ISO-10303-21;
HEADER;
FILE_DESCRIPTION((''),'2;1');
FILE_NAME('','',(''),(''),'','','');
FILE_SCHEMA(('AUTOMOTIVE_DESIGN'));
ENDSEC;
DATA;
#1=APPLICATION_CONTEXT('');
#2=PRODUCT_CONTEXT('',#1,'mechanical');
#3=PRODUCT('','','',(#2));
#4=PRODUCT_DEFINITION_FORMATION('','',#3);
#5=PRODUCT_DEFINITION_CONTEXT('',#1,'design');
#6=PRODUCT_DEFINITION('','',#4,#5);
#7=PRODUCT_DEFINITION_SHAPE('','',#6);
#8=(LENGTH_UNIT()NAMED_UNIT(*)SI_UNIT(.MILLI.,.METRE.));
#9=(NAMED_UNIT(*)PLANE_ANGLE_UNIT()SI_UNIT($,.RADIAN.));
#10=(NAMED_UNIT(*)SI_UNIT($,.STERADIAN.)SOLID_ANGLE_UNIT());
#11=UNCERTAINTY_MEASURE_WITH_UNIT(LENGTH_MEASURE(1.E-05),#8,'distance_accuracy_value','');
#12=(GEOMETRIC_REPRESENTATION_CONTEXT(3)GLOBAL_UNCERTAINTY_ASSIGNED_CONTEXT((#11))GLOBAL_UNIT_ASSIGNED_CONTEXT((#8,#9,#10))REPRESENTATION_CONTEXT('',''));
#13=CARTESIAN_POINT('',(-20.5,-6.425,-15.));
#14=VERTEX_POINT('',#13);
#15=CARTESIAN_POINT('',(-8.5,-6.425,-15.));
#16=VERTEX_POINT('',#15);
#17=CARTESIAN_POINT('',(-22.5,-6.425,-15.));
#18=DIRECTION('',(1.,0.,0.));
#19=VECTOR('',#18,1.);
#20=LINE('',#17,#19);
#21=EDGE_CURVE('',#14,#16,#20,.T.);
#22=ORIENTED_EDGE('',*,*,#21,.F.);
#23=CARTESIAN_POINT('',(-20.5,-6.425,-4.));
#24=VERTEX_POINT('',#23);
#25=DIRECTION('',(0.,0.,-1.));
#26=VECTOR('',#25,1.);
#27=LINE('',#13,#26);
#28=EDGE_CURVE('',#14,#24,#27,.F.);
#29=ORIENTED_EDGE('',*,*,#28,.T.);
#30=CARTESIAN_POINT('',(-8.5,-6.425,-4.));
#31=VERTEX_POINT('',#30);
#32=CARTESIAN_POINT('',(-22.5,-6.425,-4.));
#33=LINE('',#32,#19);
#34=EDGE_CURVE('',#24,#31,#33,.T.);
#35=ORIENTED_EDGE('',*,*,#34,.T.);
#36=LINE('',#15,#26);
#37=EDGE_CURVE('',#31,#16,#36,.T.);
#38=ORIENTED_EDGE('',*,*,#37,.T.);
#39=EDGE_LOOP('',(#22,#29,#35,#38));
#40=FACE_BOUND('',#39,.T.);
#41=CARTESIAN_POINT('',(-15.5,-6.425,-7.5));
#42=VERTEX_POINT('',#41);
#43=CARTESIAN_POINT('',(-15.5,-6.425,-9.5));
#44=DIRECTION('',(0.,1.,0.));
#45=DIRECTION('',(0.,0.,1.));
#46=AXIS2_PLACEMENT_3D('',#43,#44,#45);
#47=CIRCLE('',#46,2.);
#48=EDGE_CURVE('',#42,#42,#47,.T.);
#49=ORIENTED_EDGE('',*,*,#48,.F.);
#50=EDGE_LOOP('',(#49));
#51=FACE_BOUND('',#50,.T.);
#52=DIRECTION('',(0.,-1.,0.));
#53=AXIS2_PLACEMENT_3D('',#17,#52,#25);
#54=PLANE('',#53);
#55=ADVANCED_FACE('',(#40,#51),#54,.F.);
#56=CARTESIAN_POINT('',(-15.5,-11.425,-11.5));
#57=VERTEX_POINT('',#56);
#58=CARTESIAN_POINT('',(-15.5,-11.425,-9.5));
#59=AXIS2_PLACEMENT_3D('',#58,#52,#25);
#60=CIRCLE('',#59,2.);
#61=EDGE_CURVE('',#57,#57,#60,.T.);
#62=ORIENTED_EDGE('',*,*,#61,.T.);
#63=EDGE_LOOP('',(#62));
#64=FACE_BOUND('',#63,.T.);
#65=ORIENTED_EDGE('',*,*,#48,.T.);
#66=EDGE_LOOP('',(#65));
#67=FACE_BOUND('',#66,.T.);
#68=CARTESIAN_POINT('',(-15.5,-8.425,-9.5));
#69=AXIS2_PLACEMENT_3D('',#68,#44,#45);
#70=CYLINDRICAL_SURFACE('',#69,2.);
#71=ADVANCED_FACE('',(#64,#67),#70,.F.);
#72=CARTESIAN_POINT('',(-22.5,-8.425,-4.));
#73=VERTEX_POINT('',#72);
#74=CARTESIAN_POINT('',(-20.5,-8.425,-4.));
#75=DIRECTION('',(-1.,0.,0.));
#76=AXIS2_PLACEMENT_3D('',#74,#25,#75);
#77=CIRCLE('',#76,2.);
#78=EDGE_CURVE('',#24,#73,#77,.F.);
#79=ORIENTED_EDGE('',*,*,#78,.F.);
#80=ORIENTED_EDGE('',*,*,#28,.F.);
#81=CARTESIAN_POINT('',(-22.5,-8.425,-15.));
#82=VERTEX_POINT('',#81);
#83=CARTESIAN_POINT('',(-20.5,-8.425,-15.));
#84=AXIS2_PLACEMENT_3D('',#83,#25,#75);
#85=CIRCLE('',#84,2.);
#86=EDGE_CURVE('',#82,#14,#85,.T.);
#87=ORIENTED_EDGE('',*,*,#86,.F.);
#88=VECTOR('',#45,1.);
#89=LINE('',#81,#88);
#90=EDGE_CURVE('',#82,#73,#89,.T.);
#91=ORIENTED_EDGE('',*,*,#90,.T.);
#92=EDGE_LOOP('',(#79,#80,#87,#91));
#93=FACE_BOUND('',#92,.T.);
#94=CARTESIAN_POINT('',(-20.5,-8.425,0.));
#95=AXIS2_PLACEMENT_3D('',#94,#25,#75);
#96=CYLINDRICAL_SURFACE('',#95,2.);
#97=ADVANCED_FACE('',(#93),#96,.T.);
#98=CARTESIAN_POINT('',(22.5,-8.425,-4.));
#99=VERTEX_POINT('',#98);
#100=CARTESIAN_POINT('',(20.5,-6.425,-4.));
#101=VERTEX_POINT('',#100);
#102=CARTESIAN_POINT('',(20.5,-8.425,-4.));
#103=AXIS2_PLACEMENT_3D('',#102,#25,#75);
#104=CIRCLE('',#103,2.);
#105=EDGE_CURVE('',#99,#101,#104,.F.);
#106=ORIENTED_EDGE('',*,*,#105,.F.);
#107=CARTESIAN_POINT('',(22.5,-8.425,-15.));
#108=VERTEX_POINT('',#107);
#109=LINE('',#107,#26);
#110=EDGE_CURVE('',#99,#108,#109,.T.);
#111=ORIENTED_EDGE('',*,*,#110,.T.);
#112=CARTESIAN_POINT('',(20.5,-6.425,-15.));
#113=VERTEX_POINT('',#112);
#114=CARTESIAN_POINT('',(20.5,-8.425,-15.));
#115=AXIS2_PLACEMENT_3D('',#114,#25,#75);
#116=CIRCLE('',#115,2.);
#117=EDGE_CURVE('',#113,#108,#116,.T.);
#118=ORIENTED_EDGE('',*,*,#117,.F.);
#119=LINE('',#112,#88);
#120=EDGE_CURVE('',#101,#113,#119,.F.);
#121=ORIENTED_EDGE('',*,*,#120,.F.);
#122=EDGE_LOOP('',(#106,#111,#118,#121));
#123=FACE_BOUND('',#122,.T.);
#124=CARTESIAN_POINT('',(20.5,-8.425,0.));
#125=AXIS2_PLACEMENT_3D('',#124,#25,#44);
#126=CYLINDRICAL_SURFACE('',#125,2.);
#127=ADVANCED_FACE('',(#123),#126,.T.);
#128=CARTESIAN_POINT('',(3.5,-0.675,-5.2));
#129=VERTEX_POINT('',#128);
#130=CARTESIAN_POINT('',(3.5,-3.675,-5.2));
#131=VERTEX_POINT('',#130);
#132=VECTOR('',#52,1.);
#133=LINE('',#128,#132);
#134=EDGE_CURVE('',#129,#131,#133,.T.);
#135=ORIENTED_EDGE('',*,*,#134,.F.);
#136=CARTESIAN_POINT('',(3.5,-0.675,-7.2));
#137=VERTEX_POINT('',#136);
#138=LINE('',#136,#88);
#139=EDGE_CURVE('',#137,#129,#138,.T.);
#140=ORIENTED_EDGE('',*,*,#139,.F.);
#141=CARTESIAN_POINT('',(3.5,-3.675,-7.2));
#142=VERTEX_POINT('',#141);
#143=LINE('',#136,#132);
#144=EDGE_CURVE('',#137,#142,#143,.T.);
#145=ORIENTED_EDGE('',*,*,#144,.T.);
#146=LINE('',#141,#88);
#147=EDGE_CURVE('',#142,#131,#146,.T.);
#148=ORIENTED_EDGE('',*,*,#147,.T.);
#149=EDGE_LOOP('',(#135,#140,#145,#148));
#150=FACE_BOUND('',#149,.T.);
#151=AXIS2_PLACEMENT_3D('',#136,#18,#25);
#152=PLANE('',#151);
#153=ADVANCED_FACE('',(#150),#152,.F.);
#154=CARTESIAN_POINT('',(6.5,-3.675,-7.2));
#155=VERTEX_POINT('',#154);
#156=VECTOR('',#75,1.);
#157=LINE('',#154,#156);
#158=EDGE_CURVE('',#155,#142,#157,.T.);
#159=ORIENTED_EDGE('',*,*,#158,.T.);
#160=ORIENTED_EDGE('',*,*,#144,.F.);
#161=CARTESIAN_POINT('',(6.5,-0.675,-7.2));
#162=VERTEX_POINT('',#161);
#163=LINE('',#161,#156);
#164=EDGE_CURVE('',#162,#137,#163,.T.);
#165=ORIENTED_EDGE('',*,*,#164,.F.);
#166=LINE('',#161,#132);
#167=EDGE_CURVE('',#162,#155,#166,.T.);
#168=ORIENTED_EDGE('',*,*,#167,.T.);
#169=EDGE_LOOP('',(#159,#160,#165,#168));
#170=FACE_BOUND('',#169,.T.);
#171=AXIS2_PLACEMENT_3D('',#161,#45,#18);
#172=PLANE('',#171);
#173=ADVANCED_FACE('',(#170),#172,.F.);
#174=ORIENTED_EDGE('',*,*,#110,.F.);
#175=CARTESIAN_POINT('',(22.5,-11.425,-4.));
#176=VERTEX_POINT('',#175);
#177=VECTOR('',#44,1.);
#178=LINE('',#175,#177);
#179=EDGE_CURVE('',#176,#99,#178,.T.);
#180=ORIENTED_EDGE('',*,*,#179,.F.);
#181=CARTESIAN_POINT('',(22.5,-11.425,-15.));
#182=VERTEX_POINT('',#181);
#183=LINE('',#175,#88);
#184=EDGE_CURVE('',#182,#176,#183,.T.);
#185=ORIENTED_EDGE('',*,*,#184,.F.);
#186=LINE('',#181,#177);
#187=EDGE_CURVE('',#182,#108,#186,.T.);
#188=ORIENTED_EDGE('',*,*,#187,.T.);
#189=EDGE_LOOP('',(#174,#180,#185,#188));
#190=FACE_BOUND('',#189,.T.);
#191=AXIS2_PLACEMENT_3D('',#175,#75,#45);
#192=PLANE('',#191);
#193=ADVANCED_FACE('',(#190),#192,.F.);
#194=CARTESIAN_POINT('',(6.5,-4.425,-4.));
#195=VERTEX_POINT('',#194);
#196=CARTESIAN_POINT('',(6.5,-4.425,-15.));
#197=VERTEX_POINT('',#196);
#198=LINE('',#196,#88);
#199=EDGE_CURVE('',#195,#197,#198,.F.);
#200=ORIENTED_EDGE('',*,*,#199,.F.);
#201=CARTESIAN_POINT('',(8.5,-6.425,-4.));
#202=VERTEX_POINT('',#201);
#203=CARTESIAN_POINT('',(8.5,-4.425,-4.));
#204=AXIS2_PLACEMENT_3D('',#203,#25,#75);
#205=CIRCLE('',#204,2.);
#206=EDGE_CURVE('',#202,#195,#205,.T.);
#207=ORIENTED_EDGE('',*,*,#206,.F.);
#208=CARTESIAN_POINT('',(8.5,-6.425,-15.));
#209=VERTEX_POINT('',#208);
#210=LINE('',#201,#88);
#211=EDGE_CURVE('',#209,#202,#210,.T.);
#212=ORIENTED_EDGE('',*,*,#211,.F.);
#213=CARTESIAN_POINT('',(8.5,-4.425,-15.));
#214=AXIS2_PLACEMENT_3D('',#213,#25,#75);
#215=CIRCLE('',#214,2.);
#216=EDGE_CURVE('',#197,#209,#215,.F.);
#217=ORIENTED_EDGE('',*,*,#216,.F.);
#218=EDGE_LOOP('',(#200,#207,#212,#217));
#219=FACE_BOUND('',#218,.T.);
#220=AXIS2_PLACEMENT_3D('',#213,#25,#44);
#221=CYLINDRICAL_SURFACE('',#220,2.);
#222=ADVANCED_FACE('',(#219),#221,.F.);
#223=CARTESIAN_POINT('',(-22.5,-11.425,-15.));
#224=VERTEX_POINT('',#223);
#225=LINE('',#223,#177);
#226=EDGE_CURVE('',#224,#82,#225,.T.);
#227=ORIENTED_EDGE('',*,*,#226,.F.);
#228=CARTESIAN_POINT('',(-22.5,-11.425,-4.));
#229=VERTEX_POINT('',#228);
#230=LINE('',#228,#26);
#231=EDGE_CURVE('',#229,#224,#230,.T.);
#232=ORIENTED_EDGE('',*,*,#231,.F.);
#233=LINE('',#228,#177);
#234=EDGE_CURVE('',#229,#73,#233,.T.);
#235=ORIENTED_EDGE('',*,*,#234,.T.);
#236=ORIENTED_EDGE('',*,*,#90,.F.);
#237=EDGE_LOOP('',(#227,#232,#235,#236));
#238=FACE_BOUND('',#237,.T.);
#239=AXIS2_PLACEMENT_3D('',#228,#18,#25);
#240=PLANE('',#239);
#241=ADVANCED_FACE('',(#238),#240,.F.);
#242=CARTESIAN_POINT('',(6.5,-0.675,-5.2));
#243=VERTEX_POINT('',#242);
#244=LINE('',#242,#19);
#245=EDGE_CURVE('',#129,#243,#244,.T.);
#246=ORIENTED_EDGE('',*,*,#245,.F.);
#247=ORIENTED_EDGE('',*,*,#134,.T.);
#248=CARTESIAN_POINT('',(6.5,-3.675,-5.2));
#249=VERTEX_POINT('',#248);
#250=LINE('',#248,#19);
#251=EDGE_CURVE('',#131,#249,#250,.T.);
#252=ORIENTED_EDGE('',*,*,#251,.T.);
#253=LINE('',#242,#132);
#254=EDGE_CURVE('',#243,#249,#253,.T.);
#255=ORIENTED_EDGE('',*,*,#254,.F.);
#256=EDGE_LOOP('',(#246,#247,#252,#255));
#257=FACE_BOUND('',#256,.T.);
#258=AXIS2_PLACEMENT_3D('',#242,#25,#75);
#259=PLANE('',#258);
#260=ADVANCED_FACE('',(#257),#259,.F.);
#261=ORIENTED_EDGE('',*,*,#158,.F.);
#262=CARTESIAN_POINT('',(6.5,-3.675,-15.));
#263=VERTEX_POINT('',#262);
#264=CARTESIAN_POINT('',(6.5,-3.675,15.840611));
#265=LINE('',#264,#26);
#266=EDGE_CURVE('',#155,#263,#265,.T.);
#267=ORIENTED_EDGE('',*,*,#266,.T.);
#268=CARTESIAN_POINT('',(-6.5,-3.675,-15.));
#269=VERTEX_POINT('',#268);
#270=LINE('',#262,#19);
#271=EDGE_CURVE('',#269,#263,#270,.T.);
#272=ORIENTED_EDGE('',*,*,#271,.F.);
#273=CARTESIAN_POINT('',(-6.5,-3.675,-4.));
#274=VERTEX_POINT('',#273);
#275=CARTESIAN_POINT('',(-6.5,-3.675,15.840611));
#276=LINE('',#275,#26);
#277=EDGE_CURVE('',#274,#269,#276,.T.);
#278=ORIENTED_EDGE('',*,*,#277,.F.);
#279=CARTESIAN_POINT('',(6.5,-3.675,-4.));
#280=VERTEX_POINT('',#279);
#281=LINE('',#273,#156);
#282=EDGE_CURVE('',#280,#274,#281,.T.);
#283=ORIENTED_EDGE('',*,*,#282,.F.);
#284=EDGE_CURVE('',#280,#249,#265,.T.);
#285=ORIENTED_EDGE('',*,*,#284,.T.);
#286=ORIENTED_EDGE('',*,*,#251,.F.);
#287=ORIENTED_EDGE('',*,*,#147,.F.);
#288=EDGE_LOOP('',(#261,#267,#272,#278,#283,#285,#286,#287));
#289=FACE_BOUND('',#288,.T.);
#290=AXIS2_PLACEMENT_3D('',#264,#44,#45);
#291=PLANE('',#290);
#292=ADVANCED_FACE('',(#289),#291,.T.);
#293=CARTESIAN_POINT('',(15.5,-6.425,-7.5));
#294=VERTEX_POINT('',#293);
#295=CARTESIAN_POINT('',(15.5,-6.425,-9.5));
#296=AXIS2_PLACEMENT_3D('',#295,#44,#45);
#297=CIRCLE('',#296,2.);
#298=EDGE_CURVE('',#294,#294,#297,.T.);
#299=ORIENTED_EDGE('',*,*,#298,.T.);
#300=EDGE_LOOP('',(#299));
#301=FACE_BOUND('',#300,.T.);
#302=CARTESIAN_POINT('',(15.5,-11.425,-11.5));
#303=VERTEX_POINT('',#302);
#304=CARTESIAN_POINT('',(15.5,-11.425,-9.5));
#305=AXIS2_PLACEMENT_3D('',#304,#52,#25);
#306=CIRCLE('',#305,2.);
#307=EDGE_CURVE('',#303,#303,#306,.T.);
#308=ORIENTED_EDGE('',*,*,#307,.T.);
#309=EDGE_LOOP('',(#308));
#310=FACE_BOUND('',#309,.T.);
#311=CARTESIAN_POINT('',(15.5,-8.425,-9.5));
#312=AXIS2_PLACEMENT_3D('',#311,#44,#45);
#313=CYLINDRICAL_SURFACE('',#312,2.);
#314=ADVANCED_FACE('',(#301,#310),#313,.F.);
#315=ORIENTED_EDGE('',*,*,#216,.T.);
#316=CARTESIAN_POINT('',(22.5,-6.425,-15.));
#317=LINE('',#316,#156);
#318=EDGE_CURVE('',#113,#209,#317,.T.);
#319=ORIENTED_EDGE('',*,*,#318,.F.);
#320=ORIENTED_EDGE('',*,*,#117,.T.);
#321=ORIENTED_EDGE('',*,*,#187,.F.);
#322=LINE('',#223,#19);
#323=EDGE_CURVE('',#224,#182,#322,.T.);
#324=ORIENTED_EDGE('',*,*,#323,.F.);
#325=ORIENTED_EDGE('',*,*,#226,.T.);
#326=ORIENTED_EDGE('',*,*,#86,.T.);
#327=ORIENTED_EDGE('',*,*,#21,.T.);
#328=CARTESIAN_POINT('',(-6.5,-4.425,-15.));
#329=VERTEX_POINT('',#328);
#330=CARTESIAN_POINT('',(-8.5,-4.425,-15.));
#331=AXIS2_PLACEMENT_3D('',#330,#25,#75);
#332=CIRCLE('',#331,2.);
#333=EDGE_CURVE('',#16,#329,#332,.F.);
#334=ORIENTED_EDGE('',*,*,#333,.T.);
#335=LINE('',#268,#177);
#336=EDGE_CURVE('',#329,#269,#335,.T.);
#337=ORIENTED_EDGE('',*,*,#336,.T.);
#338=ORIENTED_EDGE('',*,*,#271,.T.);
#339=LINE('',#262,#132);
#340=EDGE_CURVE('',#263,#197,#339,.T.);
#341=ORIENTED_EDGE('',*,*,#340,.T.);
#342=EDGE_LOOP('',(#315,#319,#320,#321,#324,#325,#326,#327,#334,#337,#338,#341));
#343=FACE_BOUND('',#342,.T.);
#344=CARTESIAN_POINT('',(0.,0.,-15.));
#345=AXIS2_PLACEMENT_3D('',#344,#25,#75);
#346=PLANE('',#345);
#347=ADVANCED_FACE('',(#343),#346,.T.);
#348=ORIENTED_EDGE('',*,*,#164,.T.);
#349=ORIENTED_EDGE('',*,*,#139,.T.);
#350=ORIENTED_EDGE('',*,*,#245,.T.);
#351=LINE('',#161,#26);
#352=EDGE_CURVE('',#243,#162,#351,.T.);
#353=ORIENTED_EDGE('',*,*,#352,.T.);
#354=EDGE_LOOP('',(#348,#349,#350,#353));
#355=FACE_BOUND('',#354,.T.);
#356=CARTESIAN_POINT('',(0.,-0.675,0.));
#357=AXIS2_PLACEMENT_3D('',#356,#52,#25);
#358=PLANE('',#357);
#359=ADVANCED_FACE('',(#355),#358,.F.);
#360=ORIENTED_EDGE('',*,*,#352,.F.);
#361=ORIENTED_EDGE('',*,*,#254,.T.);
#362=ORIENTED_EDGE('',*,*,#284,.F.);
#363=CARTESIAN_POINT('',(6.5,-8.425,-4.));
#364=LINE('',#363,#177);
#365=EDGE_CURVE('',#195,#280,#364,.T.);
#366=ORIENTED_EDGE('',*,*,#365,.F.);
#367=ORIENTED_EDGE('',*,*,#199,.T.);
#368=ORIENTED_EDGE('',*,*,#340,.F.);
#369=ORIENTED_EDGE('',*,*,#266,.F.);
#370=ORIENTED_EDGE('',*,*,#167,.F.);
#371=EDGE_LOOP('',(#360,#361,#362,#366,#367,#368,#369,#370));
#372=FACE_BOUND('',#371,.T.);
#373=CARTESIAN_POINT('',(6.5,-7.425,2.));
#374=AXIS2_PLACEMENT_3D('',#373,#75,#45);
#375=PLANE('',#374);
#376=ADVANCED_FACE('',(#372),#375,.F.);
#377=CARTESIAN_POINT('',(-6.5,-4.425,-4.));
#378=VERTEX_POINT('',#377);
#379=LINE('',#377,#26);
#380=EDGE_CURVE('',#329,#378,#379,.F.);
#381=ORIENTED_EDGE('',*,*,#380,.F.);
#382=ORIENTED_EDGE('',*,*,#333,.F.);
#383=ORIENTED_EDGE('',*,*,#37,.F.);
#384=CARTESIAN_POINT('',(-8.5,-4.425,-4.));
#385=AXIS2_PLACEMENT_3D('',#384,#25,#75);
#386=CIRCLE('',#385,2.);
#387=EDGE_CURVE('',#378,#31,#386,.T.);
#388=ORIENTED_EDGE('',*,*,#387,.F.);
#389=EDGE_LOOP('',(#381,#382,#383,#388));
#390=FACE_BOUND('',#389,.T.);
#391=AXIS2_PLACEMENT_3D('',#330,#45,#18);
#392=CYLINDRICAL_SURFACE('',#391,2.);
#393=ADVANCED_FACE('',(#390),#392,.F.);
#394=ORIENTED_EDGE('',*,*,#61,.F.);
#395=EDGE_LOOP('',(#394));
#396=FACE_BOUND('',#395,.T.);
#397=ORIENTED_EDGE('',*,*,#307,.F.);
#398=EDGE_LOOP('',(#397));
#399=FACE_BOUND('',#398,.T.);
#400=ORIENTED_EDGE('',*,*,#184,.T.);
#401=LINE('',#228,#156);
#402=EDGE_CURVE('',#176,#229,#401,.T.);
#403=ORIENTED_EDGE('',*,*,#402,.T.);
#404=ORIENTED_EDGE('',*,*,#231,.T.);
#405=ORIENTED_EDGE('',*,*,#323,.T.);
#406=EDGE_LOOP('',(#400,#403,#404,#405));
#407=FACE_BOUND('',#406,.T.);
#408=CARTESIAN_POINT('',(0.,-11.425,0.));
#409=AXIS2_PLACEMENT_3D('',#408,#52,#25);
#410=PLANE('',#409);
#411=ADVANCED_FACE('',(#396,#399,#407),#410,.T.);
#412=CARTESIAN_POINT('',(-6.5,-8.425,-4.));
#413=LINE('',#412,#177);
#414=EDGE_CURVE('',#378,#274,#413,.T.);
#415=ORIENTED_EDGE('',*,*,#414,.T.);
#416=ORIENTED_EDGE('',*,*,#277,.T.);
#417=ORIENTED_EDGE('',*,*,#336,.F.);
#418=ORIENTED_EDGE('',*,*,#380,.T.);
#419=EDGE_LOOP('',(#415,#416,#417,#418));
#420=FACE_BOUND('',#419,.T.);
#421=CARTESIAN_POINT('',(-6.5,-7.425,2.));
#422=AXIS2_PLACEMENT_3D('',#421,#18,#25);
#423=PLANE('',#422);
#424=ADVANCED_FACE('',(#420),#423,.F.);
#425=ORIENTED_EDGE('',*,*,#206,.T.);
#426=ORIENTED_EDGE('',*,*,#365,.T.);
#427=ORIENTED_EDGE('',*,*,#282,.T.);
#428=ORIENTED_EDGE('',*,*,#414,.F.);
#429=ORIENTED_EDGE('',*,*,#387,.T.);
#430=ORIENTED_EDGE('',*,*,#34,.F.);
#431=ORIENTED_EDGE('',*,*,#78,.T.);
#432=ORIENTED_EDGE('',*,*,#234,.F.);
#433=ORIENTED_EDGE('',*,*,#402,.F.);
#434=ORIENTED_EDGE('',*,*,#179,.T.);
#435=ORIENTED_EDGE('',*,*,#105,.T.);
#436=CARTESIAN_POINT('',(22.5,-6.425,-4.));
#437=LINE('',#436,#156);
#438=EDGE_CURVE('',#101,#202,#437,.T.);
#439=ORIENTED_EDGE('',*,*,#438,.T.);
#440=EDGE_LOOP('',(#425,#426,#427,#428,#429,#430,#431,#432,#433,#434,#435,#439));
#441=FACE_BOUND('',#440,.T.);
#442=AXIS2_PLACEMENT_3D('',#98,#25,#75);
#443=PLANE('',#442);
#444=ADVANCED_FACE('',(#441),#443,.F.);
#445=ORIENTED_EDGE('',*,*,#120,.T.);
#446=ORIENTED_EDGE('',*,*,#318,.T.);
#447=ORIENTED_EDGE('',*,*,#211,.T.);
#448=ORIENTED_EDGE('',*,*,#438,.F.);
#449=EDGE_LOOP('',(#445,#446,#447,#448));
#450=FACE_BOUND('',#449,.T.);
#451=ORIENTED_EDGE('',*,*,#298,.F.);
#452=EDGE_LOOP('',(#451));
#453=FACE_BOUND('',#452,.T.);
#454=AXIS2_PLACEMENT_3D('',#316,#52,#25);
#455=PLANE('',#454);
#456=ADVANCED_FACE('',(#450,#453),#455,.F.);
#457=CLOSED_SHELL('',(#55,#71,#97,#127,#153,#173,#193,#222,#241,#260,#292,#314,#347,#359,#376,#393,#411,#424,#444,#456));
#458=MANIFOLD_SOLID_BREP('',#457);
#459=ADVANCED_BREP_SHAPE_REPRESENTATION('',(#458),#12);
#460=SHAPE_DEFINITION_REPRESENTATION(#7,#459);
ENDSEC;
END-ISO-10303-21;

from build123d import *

# Parameters (mm, degrees)
BOSS_EXTRUDE1_DEPTH      = 2
SKETCH2_R                = 1
CUT_EXTRUDE1_DEPTH       = 11.827309223
CUT_EXTRUDE2_DEPTH       = 11.827309223
BOSS_EXTRUDE3_DEPTH      = 15
BOSS_EXTRUDE3_DEPTH_BACK = 2
SKETCH4_W                = 13
SKETCH4_H                = 4.75
SKETCH6_W                = 11
SKETCH6_H                = 2
BOSS_EXTRUDE4_DEPTH      = 16
SKETCH7_W                = 11
SKETCH7_H                = 2
BOSS_EXTRUDE5_DEPTH      = 16
SKETCH8_R                = 2
CUT_EXTRUDE3_DEPTH       = 31.850810362
FILLET5_R                = 2
FILLET6_R                = 2
FILLET7_R                = 2
FILLET8_R                = 2
SKETCH10_W               = 2
SKETCH10_H               = 16.939290608
CUT_EXTRUDE4_DEPTH       = 34.719143302
SKETCH11_W               = 13
SKETCH11_H               = 6
CUT_EXTRUDE5_DEPTH       = 28.45564605
SKETCH12_W               = 3
SKETCH12_H               = 2
BOSS_EXTRUDE6_DEPTH      = 3
SKETCH13_W               = 45
SKETCH13_H               = 11
SKETCH13_R               = 2
BOSS_EXTRUDE7_DEPTH      = 3


with BuildPart() as part:
    # Sketch1 → Boss-Extrude1 (new body)
    with BuildSketch(Plane.XY):
        with BuildLine():
            Line((-5.5, -8.425), (5.5, -8.425))
            ThreePointArc((5.5, -8.425), (6.207106781, -8.132106781), (6.5, -7.425))
            Line((6.5, -7.425), (6.5, 7.425))
            ThreePointArc((6.5, 7.425), (6.207106781, 8.132106781), (5.5, 8.425))
            Line((5.5, 8.425), (-5.5, 8.425))
            ThreePointArc((-5.5, 8.425), (-6.207106781, 8.132106781), (-6.5, 7.425))
            Line((-6.5, 7.425), (-6.5, -7.425))
            ThreePointArc((-6.5, -7.425), (-6.207106781, -8.132106781), (-5.5, -8.425))
        make_face()
    extrude(amount=BOSS_EXTRUDE1_DEPTH)

    # Sketch2 → Cut-Extrude1 (cut, through all)
    with BuildSketch(Plane.XY.offset(2)):
        with Locations((0, 6.75)):
            Circle(SKETCH2_R)
        with Locations((0, -2)):
            Circle(SKETCH2_R)
    extrude(amount=-CUT_EXTRUDE1_DEPTH, mode=Mode.SUBTRACT)

    # Sketch3 → Cut-Extrude2 (cut, through all)
    with BuildSketch(Plane.XY.offset(2)):
        with BuildLine():
            Line((1.8, 2.875), (1.8, 1.875))
            ThreePointArc((1.8, 1.875), (0, 0.075), (-1.8, 1.875))
            Line((-1.8, 1.875), (-1.8, 2.875))
            ThreePointArc((-1.8, 2.875), (0, 4.675), (1.8, 2.875))
        make_face()
    extrude(amount=-CUT_EXTRUDE2_DEPTH, mode=Mode.SUBTRACT)

    # Sketch4 → Boss-Extrude3 (add, two sides: drawn at the far end of the back side and taken through both)
    with BuildSketch(Plane(origin=(0, 0, 0), x_dir=(-1, 0, 0), z_dir=(0, 0, -1)).offset(-BOSS_EXTRUDE3_DEPTH_BACK)):
        with Locations((0, -6.05)):
            Rectangle(SKETCH4_W, SKETCH4_H)
    extrude(amount=BOSS_EXTRUDE3_DEPTH + BOSS_EXTRUDE3_DEPTH_BACK)

    # Sketch6 → Boss-Extrude4 (add)
    with BuildSketch(Plane(origin=(6.5, 0, 0), x_dir=(0, 0, -1), z_dir=(1, 0, 0))):
        with Locations((9.5, -7.425)):
            Rectangle(SKETCH6_W, SKETCH6_H)
    extrude(amount=BOSS_EXTRUDE4_DEPTH)

    # Sketch7 → Boss-Extrude5 (add)
    with BuildSketch(Plane.ZY.offset(6.5)):
        with Locations((-9.5, -7.425)):
            Rectangle(SKETCH7_W, SKETCH7_H)
    extrude(amount=BOSS_EXTRUDE5_DEPTH)

    # Sketch8 → Cut-Extrude3 (cut, through all)
    with BuildSketch(Plane(origin=(0, -6.425, 0), x_dir=(1, 0, 0), z_dir=(0, 1, 0))):
        with Locations(Location((15.5, 9.5, 0), (0, 0, 270))):
            Circle(SKETCH8_R)
        with Locations(Location((-15.5, 9.5, 0), (0, 0, 270))):
            Circle(SKETCH8_R)
    extrude(amount=-CUT_EXTRUDE3_DEPTH, mode=Mode.SUBTRACT)

    # Fillet5
    fillet5_edges = [part.edges().sort_by_distance(p)[0] for p in [
        (22.5, -6.425, -9.5),
    ]]
    fillet(fillet5_edges, radius=FILLET5_R - 0.0001)  # a hair under: the kernel refuses the full size

    # Fillet6
    fillet6_edges = [part.edges().sort_by_distance(p)[0] for p in [
        (-22.5, -6.425, -9.5),
    ]]
    fillet(fillet6_edges, radius=FILLET6_R - 0.0001)  # a hair under: the kernel refuses the full size

    # Fillet7
    fillet7_edges = [part.edges().sort_by_distance(p)[0] for p in [
        (6.5, -6.425, -9.5),
    ]]
    fillet(fillet7_edges, radius=FILLET7_R)

    # Fillet8
    fillet8_edges = [part.edges().sort_by_distance(p)[0] for p in [
        (-6.5, -6.425, -9.5),
    ]]
    fillet(fillet8_edges, radius=FILLET8_R)

    # Sketch10 → Cut-Extrude4 (cut, through all)
    with BuildSketch(Plane(origin=(6.5, 0, 0), x_dir=(0, 0, -1), z_dir=(1, 0, 0))):
        with Locations((-1, 4.794645304)):
            Rectangle(SKETCH10_W, SKETCH10_H)
    extrude(amount=-CUT_EXTRUDE4_DEPTH, mode=Mode.SUBTRACT)

    # Sketch11 → Cut-Extrude5 (cut, through all)
    with BuildSketch(Plane(origin=(0, -3.675, 0), x_dir=(1, 0, 0), z_dir=(0, 1, 0))):
        with Locations((0, 1)):
            Rectangle(SKETCH11_W, SKETCH11_H)
    extrude(amount=-CUT_EXTRUDE5_DEPTH, mode=Mode.SUBTRACT)

    # Sketch12 → Boss-Extrude6 (add)
    with BuildSketch(Plane(origin=(0, -3.675, 0), x_dir=(1, 0, 0), z_dir=(0, 1, 0))):
        with Locations((5, 6.2)):
            Rectangle(SKETCH12_W, SKETCH12_H)
    extrude(amount=BOSS_EXTRUDE6_DEPTH)

    # Sketch13 → Boss-Extrude7 (add)
    with BuildSketch(Plane.XZ.offset(8.425)):
        with Locations((0, -9.5)):
            Rectangle(SKETCH13_W, SKETCH13_H)
        with Locations(Location((-15.5, -9.5, 0), (0, 0, 90))):
            Circle(SKETCH13_R, mode=Mode.SUBTRACT)
        with Locations(Location((15.5, -9.5, 0), (0, 0, 90))):
            Circle(SKETCH13_R, mode=Mode.SUBTRACT)
    extrude(amount=BOSS_EXTRUDE7_DEPTH)


solid = part.part
